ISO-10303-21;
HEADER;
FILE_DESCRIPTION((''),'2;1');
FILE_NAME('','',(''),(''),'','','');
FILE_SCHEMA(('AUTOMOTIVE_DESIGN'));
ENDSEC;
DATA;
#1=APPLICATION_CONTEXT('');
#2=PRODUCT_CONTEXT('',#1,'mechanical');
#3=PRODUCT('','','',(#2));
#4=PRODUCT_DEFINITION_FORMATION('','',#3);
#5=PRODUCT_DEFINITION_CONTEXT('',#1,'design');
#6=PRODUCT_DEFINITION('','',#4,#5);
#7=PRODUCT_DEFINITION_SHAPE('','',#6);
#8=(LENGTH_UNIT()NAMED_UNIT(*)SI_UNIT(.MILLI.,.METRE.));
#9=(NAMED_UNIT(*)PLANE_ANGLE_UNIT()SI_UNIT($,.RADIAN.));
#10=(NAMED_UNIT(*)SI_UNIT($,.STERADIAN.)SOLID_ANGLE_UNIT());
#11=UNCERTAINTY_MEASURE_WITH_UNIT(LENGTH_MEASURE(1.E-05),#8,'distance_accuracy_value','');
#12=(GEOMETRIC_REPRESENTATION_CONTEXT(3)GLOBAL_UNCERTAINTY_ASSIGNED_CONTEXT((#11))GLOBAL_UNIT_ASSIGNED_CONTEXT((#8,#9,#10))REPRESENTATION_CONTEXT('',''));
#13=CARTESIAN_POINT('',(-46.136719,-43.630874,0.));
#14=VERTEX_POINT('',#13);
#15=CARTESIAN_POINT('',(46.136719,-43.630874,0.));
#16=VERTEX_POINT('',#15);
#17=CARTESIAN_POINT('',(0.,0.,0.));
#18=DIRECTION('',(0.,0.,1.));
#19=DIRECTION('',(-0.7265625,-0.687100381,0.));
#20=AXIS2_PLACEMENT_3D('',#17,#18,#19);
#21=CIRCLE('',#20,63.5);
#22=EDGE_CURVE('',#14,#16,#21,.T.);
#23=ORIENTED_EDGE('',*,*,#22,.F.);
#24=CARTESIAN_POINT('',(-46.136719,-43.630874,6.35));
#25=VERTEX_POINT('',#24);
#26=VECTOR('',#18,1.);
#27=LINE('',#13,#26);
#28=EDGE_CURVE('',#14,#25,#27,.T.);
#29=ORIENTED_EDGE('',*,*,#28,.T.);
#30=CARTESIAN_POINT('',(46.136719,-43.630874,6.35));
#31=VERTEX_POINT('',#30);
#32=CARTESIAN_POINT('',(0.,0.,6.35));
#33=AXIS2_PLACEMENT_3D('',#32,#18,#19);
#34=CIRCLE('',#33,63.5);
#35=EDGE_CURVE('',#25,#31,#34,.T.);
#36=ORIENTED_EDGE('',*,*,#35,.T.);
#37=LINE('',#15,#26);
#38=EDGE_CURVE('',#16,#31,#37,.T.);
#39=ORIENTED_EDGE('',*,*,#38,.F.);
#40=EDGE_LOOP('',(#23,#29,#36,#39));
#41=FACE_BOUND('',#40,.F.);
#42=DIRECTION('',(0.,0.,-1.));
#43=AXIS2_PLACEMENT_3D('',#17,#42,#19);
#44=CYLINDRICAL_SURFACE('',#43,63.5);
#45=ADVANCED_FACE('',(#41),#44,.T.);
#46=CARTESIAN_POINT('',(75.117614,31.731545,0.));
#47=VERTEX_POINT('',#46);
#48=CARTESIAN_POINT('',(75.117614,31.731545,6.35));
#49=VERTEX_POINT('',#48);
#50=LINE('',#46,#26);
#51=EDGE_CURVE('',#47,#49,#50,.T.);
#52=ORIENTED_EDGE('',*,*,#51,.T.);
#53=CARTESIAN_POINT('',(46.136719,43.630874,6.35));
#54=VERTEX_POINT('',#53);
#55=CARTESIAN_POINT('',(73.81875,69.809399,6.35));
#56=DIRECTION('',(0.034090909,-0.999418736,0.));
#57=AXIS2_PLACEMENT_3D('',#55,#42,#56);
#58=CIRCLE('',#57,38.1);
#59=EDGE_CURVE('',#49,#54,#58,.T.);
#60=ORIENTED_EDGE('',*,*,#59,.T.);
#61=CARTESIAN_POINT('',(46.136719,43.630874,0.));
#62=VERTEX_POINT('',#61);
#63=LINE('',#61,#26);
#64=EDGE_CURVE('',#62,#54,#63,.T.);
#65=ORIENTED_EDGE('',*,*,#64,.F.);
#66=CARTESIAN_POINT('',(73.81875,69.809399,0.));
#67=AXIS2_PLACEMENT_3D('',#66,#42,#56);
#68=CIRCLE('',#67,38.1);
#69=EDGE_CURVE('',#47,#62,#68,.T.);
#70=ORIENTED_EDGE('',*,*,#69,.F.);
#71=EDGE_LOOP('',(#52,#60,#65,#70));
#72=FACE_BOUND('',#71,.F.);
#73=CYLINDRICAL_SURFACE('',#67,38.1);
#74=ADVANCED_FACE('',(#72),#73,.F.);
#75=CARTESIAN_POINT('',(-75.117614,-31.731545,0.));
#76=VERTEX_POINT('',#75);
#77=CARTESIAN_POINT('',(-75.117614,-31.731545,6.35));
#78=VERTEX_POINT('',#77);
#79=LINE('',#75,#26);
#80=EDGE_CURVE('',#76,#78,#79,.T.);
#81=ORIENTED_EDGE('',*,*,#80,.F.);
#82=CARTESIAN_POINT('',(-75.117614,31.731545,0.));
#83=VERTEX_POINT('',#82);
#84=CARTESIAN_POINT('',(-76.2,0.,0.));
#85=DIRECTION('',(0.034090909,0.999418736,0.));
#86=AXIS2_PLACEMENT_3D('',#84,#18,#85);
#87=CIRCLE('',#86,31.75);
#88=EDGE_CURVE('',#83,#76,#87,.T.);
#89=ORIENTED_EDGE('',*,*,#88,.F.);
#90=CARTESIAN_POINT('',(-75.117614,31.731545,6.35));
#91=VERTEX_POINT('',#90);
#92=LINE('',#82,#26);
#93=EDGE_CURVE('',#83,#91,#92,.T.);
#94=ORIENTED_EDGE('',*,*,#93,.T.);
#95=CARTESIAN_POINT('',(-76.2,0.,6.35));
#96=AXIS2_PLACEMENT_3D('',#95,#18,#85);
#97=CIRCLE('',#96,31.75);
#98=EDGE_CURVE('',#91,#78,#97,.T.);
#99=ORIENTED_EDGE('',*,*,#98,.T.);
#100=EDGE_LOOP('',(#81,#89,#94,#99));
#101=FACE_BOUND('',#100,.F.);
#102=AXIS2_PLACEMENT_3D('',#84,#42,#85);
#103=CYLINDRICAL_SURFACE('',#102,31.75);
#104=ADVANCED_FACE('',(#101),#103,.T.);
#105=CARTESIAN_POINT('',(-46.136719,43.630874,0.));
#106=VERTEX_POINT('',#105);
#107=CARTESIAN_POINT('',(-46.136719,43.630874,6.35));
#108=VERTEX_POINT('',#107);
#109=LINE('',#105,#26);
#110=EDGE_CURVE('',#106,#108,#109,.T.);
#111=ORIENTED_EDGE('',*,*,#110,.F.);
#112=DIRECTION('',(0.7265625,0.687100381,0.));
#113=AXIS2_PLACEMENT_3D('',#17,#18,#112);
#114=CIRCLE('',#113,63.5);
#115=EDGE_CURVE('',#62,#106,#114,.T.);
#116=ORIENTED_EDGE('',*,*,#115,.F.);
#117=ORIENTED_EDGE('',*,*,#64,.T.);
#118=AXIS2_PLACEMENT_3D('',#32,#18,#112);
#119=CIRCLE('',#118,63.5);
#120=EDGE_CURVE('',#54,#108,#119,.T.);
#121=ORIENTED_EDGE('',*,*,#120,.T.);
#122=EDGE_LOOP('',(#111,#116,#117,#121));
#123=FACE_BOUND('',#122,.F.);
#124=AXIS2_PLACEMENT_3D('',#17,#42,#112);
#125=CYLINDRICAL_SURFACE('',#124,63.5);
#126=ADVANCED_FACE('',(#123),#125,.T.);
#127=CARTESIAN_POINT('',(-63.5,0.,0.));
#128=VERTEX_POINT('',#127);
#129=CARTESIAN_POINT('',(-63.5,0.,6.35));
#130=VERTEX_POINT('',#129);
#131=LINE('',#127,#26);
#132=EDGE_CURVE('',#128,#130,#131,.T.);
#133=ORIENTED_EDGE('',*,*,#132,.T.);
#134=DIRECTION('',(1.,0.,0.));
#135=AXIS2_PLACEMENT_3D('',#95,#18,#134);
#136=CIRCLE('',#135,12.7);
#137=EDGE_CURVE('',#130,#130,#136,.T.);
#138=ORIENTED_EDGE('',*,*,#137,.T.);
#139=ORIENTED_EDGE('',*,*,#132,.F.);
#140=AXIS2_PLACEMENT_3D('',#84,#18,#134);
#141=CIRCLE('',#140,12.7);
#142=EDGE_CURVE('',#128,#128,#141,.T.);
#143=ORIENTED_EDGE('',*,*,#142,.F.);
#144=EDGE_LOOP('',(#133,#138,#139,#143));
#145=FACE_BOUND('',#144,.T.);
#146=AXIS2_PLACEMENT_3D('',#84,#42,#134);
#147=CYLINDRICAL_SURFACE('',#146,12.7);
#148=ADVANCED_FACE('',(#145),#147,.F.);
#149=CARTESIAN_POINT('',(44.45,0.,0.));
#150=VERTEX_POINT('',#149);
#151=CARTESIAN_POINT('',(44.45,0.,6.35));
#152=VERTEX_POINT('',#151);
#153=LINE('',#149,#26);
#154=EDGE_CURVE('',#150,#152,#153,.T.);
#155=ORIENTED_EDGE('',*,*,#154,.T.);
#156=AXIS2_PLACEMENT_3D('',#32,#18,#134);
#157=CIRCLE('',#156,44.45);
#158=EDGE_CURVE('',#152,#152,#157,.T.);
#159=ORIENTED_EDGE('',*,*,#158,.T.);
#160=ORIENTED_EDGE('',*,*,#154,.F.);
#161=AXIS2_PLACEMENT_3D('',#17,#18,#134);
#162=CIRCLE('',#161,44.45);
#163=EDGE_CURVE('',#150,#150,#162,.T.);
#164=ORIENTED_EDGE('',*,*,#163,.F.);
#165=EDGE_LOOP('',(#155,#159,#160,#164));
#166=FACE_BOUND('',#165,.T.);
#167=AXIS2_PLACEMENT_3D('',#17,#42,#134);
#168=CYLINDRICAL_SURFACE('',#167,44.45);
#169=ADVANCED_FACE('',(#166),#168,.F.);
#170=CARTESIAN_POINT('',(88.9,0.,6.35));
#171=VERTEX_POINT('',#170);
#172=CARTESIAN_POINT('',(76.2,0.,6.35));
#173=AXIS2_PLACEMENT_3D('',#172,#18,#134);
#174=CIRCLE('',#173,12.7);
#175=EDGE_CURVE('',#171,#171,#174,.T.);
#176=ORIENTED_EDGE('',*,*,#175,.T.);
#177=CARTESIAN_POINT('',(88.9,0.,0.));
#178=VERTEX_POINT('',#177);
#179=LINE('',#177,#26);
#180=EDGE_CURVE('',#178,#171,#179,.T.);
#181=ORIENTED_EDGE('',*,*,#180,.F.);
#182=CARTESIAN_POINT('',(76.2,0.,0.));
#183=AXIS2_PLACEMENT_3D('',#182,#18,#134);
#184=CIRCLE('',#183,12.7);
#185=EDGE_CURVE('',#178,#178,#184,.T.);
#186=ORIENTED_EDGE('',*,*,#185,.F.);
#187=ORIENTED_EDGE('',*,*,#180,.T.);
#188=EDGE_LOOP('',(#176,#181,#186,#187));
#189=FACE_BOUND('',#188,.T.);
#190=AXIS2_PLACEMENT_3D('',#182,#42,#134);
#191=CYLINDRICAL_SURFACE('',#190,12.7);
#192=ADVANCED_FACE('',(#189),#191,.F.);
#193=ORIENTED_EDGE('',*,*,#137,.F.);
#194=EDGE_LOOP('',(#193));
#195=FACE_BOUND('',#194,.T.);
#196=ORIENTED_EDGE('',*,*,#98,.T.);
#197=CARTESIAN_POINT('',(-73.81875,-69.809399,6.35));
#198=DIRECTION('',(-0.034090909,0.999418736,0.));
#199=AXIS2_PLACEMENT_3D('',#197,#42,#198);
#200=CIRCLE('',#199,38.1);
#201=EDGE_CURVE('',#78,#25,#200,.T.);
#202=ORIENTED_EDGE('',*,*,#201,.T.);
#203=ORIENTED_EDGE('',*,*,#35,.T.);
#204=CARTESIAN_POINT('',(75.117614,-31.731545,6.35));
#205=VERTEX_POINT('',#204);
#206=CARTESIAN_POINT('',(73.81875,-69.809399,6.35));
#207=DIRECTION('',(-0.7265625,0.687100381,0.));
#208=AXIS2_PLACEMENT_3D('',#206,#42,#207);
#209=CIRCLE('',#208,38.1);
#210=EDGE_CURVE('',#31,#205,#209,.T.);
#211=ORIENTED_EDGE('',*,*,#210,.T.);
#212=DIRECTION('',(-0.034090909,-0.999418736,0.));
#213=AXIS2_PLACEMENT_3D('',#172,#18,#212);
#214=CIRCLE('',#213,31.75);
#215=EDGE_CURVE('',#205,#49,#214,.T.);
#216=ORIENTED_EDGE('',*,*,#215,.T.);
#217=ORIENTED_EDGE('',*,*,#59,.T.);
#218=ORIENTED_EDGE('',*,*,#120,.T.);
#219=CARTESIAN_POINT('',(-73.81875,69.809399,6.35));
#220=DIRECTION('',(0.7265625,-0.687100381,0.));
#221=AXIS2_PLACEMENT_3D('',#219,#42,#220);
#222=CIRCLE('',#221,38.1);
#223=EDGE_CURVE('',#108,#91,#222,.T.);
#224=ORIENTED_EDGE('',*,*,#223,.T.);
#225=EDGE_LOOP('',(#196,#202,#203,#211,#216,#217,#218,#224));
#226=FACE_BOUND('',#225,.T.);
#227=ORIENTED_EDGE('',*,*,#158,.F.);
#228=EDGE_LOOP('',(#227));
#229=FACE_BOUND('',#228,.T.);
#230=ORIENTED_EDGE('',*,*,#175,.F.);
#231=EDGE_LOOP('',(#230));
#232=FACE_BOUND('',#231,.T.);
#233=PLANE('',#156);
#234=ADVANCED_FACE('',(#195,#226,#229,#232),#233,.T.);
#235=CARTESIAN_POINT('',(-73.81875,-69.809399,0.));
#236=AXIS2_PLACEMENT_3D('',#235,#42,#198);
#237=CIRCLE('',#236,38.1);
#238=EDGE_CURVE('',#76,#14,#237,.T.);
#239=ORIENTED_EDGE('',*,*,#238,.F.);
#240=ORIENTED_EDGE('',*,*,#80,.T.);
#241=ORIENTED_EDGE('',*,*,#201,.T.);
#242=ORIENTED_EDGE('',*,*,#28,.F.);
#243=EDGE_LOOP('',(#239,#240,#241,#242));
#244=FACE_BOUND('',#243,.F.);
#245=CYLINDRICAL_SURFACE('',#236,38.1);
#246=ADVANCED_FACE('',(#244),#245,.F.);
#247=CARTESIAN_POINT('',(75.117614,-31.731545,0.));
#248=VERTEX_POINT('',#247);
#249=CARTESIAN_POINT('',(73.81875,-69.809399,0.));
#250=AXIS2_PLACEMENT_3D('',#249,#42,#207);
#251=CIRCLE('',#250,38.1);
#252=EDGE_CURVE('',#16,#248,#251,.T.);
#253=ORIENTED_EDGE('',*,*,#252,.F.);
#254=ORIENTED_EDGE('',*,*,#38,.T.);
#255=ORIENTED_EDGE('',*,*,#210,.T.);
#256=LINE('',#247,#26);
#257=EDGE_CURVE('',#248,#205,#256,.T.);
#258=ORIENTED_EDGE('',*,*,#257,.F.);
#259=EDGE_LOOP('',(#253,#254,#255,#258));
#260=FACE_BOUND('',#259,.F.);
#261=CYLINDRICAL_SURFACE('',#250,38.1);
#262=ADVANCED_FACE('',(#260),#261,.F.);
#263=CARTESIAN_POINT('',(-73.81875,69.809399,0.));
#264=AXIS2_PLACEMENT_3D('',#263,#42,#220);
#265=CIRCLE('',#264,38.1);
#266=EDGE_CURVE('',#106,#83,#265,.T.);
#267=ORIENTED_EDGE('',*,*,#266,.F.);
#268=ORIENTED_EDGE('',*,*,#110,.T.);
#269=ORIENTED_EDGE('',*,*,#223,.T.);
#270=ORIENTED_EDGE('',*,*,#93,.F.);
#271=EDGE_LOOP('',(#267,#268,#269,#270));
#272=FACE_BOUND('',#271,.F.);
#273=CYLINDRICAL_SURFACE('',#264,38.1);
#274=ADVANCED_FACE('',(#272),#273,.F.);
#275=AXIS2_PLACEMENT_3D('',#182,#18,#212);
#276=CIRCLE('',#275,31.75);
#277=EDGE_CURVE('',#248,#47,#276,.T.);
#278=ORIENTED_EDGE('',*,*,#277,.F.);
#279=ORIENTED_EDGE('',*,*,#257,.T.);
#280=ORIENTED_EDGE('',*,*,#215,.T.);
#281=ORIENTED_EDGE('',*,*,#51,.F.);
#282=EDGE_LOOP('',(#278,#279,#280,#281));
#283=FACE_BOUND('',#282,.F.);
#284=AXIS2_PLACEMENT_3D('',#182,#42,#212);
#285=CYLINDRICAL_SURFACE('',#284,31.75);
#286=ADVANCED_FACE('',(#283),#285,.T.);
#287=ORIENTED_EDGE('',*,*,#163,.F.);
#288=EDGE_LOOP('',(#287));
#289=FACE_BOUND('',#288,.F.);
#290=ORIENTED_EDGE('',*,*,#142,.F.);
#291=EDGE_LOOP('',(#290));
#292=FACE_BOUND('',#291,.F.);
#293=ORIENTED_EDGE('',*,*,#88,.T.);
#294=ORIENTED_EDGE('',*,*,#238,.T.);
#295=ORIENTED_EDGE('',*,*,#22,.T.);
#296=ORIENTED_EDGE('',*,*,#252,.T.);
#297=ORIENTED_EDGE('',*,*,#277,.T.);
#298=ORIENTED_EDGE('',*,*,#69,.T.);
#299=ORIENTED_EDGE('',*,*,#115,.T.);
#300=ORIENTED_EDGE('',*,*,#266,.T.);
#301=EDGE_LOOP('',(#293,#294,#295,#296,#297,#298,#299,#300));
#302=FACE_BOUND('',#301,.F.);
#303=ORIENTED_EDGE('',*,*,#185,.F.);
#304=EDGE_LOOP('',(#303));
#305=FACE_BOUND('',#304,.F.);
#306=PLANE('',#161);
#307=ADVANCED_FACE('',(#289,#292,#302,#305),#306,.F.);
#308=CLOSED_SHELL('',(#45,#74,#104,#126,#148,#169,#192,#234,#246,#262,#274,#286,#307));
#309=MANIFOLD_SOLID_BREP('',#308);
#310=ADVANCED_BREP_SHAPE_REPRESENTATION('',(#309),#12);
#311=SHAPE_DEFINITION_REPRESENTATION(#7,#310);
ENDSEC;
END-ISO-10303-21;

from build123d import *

# Parameters (mm, degrees)
F0_R     = 12.7
F0_R_2   = 44.45
F1_DEPTH = 6.35


# Not quite as in the source:
# - a length typed as a fraction of an inch, garbled in the dataset ("3 / 203.2 mm" for 3/8 in), is restored


with BuildPart() as f1:
    # F0 (on Top) → F1 (new body)
    with BuildSketch(Plane.XY):
        with BuildLine():
            ThreePointArc((-75.1176136364, -31.7315448688), (-59.3475236203, -34.5646316236), (-46.13671875, -43.6308741946))
            ThreePointArc((-46.13671875, -43.6308741946), (0, -63.5), (46.13671875, -43.6308741946))
            ThreePointArc((46.13671875, -43.6308741946), (59.3475236203, -34.5646316236), (75.1176136364, -31.7315448688))
            ThreePointArc((75.1176136364, -31.7315448688), (107.95, 0), (75.1176136364, 31.7315448688))
            ThreePointArc((75.1176136364, 31.7315448688), (59.3475236203, 34.5646316236), (46.13671875, 43.6308741946))
            ThreePointArc((46.13671875, 43.6308741946), (0, 63.5), (-46.13671875, 43.6308741946))
            ThreePointArc((-46.13671875, 43.6308741946), (-59.3475236203, 34.5646316236), (-75.1176136364, 31.7315448688))
            ThreePointArc((-75.1176136364, 31.7315448688), (-107.95, 0), (-75.1176136364, -31.7315448688))
        make_face()
        with Locations((-76.2, 0)):
            Circle(F0_R, mode=Mode.SUBTRACT)
        Circle(F0_R_2, mode=Mode.SUBTRACT)
        with Locations((76.2, 0)):
            Circle(F0_R, mode=Mode.SUBTRACT)
    extrude(amount=F1_DEPTH)


solid = f1.part
